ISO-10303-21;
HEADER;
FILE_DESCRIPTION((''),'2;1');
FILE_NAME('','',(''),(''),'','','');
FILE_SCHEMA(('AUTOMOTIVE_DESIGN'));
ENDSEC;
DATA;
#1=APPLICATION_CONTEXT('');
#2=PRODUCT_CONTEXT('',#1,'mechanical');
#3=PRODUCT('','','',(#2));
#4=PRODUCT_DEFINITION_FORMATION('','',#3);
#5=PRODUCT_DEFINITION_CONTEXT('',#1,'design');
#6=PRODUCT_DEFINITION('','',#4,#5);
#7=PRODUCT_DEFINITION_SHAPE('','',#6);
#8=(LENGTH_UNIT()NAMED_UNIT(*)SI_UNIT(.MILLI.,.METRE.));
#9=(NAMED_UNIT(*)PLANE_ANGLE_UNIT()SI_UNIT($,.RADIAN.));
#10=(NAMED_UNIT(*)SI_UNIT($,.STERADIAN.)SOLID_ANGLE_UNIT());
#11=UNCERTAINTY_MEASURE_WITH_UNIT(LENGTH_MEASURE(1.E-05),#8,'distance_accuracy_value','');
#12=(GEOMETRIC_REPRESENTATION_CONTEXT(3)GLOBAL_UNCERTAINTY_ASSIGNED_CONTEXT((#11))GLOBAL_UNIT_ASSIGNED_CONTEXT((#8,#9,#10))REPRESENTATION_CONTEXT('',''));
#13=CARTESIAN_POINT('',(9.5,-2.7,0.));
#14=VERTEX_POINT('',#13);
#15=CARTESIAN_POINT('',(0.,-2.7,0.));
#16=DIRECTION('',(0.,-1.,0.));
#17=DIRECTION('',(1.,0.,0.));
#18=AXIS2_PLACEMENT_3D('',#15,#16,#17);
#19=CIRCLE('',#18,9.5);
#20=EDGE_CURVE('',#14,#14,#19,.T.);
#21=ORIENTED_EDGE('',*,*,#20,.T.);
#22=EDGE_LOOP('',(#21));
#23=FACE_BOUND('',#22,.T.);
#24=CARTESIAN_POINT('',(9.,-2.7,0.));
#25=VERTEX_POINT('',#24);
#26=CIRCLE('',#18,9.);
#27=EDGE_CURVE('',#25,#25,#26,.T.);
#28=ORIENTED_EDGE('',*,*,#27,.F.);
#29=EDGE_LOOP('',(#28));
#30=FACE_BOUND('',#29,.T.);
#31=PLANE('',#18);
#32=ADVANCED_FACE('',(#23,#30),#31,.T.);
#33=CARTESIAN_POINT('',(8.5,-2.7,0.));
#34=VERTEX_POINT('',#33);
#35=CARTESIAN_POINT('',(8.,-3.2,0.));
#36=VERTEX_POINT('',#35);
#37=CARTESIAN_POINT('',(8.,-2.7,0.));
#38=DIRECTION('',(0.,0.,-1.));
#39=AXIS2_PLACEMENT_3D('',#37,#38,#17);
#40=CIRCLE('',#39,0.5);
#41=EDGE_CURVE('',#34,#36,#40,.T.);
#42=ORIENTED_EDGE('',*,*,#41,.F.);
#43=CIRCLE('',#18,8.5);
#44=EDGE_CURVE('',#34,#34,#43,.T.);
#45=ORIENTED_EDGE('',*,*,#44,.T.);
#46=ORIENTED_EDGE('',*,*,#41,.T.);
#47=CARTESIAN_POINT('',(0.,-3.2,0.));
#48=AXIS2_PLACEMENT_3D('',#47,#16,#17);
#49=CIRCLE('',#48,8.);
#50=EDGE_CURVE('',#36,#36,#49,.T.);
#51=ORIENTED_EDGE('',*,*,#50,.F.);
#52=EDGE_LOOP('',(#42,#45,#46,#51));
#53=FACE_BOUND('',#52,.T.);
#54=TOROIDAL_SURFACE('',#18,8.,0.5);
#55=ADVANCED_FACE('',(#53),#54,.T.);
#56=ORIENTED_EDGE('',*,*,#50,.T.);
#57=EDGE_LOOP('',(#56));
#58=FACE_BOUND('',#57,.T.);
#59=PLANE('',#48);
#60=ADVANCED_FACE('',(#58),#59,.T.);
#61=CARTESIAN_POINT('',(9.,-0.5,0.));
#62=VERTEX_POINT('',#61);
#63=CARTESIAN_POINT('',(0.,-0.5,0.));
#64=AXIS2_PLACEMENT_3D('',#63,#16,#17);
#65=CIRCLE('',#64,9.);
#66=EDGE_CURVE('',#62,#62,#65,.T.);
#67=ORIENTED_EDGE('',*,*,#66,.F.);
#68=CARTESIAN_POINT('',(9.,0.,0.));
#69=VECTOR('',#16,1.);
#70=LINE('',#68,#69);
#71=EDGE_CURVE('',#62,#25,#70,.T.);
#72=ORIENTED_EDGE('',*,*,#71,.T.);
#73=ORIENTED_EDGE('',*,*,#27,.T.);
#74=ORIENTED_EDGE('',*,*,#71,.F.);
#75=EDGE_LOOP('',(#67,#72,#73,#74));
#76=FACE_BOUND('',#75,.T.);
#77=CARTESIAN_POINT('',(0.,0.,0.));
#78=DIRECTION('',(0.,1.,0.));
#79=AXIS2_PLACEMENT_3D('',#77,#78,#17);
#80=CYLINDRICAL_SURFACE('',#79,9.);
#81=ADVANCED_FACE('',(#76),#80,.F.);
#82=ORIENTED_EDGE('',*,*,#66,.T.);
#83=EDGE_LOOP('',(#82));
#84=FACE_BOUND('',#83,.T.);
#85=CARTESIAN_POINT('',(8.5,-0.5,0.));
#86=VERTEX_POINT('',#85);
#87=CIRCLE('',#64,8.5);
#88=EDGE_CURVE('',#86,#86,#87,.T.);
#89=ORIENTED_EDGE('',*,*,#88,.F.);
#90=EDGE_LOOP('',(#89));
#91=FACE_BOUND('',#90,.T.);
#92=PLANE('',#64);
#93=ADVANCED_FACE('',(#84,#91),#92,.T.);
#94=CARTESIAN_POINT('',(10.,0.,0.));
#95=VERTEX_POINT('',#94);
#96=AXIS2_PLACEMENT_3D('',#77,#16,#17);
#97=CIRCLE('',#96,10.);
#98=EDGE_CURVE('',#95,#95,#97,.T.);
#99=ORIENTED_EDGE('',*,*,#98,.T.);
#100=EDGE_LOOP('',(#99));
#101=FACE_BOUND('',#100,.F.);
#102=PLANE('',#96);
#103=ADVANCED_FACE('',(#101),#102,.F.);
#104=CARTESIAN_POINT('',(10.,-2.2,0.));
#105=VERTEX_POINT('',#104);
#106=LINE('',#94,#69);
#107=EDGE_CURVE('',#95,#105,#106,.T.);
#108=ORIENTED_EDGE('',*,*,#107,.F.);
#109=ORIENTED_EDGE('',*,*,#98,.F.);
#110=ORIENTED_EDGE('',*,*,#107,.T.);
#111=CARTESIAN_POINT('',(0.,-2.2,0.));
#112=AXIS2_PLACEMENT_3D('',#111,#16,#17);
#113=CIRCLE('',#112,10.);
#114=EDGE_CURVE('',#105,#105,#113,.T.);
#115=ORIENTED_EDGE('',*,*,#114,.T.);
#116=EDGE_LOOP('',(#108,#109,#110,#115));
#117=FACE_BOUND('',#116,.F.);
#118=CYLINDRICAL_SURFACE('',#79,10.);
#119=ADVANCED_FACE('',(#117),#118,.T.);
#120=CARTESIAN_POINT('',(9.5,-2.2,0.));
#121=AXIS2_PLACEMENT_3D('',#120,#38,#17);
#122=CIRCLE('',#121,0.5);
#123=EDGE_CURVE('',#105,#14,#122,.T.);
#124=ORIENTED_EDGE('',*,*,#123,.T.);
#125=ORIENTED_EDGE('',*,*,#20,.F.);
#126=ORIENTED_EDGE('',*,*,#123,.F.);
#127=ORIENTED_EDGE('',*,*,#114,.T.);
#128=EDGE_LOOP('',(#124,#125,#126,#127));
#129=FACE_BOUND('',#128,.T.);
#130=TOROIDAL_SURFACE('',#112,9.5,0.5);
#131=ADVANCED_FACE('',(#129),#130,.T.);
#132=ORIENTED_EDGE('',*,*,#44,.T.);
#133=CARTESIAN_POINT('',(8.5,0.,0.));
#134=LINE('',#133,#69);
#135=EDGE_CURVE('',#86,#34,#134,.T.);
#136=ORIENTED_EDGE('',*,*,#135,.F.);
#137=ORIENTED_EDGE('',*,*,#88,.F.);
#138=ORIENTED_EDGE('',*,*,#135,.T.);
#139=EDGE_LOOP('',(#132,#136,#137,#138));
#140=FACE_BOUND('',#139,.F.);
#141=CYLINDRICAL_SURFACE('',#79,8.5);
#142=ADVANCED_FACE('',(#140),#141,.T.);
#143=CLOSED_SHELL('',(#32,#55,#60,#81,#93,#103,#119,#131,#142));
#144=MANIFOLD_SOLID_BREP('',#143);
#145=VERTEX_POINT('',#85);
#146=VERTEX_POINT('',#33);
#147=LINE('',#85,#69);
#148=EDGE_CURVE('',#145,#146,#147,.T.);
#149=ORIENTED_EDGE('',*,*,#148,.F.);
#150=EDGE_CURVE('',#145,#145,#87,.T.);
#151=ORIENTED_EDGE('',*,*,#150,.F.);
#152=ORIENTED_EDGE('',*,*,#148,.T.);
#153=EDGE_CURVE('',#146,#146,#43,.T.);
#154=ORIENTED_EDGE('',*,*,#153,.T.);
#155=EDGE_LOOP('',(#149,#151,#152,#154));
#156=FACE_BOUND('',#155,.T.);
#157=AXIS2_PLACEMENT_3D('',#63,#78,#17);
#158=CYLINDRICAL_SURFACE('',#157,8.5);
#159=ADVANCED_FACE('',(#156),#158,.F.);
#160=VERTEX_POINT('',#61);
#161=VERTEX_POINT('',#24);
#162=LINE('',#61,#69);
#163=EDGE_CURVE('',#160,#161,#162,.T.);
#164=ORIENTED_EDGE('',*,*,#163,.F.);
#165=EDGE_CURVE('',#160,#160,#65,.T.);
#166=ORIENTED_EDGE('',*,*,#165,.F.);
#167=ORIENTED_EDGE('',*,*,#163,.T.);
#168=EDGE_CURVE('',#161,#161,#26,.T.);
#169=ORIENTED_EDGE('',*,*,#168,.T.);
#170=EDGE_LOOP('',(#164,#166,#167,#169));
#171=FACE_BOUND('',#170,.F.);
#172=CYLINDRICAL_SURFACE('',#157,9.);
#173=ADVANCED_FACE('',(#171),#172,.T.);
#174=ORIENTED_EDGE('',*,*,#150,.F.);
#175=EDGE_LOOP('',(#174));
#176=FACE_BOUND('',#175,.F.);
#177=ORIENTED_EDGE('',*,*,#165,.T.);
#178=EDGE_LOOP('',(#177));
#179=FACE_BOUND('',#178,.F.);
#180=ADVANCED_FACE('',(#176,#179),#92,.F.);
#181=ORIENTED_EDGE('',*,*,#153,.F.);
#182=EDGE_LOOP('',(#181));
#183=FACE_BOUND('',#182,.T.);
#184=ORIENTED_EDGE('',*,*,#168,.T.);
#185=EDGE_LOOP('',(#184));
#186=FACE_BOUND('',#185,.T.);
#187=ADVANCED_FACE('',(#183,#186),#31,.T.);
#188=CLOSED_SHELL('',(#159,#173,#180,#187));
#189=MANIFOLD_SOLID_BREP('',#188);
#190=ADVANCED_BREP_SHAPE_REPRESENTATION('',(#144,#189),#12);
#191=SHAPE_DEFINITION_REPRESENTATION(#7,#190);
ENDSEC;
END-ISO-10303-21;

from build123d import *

# Parameters (mm, degrees)
F0_R     = 8.5
F1_DEPTH = 3.2
F0_R_2   = 9
F2_DEPTH = 2.2
F0_R_3   = 10
F3_DEPTH = 2.7
F4_R     = 0.5
F5_R     = 0.5
F7_DEPTH = 0.5
F9_DEPTH = 0.5


# Not quite as in the source:
# - a feature names something its author has since deleted; it is built from what else it names


with BuildPart() as f1:
    # F0 (on Front) → F1 (new body)
    with BuildSketch(Plane.XZ):
        Circle(F0_R)
    extrude(amount=F1_DEPTH)

    # F5
    f5_edges = [f1.edges().sort_by_distance(p)[0] for p in [
        (-8.5, -3.2, 0),
    ]]
    fillet(f5_edges, radius=F5_R)



with BuildPart() as f2:
    # F0 (on Front) → F2 (new body)
    with BuildSketch(Plane.XZ):
        Circle(F0_R_2)
        Circle(F0_R, mode=Mode.SUBTRACT)
    extrude(amount=F2_DEPTH)


with BuildPart() as f3:
    # F0 (on Front) → F3 (new body)
    with BuildSketch(Plane.XZ):
        Circle(F0_R_3)
        Circle(F0_R_2, mode=Mode.SUBTRACT)
    extrude(amount=F3_DEPTH)

    # F4
    f4_edges = [f3.edges().sort_by_distance(p)[0] for p in [
        (-10, -2.7, 0),
    ]]
    fillet(f4_edges, radius=F4_R)


with BuildPart() as f2_1:
    # F6: moved
    add(f2.part.moved(Location((0, -0.5, 0))))


with BuildPart() as f7:
    # F7 (new): a face of the model
    f7_faces = [f3.part.faces().sort_by_distance(p)[0] for p in [
        (-9.2312994231, -2.7, 0),
    ]]
    extrude(f7_faces, amount=F7_DEPTH)


with BuildPart() as f1_1:
    add(f1.part)

    add(f3.part)  # F9 merges F3
    # F0 (on Front) → F9 (join)
    with BuildSketch(Plane.XZ):
        Circle(F0_R_2)
        Circle(F0_R, mode=Mode.SUBTRACT)
    extrude(amount=F9_DEPTH)


solid = Compound([f2_1.part, f1_1.part])
